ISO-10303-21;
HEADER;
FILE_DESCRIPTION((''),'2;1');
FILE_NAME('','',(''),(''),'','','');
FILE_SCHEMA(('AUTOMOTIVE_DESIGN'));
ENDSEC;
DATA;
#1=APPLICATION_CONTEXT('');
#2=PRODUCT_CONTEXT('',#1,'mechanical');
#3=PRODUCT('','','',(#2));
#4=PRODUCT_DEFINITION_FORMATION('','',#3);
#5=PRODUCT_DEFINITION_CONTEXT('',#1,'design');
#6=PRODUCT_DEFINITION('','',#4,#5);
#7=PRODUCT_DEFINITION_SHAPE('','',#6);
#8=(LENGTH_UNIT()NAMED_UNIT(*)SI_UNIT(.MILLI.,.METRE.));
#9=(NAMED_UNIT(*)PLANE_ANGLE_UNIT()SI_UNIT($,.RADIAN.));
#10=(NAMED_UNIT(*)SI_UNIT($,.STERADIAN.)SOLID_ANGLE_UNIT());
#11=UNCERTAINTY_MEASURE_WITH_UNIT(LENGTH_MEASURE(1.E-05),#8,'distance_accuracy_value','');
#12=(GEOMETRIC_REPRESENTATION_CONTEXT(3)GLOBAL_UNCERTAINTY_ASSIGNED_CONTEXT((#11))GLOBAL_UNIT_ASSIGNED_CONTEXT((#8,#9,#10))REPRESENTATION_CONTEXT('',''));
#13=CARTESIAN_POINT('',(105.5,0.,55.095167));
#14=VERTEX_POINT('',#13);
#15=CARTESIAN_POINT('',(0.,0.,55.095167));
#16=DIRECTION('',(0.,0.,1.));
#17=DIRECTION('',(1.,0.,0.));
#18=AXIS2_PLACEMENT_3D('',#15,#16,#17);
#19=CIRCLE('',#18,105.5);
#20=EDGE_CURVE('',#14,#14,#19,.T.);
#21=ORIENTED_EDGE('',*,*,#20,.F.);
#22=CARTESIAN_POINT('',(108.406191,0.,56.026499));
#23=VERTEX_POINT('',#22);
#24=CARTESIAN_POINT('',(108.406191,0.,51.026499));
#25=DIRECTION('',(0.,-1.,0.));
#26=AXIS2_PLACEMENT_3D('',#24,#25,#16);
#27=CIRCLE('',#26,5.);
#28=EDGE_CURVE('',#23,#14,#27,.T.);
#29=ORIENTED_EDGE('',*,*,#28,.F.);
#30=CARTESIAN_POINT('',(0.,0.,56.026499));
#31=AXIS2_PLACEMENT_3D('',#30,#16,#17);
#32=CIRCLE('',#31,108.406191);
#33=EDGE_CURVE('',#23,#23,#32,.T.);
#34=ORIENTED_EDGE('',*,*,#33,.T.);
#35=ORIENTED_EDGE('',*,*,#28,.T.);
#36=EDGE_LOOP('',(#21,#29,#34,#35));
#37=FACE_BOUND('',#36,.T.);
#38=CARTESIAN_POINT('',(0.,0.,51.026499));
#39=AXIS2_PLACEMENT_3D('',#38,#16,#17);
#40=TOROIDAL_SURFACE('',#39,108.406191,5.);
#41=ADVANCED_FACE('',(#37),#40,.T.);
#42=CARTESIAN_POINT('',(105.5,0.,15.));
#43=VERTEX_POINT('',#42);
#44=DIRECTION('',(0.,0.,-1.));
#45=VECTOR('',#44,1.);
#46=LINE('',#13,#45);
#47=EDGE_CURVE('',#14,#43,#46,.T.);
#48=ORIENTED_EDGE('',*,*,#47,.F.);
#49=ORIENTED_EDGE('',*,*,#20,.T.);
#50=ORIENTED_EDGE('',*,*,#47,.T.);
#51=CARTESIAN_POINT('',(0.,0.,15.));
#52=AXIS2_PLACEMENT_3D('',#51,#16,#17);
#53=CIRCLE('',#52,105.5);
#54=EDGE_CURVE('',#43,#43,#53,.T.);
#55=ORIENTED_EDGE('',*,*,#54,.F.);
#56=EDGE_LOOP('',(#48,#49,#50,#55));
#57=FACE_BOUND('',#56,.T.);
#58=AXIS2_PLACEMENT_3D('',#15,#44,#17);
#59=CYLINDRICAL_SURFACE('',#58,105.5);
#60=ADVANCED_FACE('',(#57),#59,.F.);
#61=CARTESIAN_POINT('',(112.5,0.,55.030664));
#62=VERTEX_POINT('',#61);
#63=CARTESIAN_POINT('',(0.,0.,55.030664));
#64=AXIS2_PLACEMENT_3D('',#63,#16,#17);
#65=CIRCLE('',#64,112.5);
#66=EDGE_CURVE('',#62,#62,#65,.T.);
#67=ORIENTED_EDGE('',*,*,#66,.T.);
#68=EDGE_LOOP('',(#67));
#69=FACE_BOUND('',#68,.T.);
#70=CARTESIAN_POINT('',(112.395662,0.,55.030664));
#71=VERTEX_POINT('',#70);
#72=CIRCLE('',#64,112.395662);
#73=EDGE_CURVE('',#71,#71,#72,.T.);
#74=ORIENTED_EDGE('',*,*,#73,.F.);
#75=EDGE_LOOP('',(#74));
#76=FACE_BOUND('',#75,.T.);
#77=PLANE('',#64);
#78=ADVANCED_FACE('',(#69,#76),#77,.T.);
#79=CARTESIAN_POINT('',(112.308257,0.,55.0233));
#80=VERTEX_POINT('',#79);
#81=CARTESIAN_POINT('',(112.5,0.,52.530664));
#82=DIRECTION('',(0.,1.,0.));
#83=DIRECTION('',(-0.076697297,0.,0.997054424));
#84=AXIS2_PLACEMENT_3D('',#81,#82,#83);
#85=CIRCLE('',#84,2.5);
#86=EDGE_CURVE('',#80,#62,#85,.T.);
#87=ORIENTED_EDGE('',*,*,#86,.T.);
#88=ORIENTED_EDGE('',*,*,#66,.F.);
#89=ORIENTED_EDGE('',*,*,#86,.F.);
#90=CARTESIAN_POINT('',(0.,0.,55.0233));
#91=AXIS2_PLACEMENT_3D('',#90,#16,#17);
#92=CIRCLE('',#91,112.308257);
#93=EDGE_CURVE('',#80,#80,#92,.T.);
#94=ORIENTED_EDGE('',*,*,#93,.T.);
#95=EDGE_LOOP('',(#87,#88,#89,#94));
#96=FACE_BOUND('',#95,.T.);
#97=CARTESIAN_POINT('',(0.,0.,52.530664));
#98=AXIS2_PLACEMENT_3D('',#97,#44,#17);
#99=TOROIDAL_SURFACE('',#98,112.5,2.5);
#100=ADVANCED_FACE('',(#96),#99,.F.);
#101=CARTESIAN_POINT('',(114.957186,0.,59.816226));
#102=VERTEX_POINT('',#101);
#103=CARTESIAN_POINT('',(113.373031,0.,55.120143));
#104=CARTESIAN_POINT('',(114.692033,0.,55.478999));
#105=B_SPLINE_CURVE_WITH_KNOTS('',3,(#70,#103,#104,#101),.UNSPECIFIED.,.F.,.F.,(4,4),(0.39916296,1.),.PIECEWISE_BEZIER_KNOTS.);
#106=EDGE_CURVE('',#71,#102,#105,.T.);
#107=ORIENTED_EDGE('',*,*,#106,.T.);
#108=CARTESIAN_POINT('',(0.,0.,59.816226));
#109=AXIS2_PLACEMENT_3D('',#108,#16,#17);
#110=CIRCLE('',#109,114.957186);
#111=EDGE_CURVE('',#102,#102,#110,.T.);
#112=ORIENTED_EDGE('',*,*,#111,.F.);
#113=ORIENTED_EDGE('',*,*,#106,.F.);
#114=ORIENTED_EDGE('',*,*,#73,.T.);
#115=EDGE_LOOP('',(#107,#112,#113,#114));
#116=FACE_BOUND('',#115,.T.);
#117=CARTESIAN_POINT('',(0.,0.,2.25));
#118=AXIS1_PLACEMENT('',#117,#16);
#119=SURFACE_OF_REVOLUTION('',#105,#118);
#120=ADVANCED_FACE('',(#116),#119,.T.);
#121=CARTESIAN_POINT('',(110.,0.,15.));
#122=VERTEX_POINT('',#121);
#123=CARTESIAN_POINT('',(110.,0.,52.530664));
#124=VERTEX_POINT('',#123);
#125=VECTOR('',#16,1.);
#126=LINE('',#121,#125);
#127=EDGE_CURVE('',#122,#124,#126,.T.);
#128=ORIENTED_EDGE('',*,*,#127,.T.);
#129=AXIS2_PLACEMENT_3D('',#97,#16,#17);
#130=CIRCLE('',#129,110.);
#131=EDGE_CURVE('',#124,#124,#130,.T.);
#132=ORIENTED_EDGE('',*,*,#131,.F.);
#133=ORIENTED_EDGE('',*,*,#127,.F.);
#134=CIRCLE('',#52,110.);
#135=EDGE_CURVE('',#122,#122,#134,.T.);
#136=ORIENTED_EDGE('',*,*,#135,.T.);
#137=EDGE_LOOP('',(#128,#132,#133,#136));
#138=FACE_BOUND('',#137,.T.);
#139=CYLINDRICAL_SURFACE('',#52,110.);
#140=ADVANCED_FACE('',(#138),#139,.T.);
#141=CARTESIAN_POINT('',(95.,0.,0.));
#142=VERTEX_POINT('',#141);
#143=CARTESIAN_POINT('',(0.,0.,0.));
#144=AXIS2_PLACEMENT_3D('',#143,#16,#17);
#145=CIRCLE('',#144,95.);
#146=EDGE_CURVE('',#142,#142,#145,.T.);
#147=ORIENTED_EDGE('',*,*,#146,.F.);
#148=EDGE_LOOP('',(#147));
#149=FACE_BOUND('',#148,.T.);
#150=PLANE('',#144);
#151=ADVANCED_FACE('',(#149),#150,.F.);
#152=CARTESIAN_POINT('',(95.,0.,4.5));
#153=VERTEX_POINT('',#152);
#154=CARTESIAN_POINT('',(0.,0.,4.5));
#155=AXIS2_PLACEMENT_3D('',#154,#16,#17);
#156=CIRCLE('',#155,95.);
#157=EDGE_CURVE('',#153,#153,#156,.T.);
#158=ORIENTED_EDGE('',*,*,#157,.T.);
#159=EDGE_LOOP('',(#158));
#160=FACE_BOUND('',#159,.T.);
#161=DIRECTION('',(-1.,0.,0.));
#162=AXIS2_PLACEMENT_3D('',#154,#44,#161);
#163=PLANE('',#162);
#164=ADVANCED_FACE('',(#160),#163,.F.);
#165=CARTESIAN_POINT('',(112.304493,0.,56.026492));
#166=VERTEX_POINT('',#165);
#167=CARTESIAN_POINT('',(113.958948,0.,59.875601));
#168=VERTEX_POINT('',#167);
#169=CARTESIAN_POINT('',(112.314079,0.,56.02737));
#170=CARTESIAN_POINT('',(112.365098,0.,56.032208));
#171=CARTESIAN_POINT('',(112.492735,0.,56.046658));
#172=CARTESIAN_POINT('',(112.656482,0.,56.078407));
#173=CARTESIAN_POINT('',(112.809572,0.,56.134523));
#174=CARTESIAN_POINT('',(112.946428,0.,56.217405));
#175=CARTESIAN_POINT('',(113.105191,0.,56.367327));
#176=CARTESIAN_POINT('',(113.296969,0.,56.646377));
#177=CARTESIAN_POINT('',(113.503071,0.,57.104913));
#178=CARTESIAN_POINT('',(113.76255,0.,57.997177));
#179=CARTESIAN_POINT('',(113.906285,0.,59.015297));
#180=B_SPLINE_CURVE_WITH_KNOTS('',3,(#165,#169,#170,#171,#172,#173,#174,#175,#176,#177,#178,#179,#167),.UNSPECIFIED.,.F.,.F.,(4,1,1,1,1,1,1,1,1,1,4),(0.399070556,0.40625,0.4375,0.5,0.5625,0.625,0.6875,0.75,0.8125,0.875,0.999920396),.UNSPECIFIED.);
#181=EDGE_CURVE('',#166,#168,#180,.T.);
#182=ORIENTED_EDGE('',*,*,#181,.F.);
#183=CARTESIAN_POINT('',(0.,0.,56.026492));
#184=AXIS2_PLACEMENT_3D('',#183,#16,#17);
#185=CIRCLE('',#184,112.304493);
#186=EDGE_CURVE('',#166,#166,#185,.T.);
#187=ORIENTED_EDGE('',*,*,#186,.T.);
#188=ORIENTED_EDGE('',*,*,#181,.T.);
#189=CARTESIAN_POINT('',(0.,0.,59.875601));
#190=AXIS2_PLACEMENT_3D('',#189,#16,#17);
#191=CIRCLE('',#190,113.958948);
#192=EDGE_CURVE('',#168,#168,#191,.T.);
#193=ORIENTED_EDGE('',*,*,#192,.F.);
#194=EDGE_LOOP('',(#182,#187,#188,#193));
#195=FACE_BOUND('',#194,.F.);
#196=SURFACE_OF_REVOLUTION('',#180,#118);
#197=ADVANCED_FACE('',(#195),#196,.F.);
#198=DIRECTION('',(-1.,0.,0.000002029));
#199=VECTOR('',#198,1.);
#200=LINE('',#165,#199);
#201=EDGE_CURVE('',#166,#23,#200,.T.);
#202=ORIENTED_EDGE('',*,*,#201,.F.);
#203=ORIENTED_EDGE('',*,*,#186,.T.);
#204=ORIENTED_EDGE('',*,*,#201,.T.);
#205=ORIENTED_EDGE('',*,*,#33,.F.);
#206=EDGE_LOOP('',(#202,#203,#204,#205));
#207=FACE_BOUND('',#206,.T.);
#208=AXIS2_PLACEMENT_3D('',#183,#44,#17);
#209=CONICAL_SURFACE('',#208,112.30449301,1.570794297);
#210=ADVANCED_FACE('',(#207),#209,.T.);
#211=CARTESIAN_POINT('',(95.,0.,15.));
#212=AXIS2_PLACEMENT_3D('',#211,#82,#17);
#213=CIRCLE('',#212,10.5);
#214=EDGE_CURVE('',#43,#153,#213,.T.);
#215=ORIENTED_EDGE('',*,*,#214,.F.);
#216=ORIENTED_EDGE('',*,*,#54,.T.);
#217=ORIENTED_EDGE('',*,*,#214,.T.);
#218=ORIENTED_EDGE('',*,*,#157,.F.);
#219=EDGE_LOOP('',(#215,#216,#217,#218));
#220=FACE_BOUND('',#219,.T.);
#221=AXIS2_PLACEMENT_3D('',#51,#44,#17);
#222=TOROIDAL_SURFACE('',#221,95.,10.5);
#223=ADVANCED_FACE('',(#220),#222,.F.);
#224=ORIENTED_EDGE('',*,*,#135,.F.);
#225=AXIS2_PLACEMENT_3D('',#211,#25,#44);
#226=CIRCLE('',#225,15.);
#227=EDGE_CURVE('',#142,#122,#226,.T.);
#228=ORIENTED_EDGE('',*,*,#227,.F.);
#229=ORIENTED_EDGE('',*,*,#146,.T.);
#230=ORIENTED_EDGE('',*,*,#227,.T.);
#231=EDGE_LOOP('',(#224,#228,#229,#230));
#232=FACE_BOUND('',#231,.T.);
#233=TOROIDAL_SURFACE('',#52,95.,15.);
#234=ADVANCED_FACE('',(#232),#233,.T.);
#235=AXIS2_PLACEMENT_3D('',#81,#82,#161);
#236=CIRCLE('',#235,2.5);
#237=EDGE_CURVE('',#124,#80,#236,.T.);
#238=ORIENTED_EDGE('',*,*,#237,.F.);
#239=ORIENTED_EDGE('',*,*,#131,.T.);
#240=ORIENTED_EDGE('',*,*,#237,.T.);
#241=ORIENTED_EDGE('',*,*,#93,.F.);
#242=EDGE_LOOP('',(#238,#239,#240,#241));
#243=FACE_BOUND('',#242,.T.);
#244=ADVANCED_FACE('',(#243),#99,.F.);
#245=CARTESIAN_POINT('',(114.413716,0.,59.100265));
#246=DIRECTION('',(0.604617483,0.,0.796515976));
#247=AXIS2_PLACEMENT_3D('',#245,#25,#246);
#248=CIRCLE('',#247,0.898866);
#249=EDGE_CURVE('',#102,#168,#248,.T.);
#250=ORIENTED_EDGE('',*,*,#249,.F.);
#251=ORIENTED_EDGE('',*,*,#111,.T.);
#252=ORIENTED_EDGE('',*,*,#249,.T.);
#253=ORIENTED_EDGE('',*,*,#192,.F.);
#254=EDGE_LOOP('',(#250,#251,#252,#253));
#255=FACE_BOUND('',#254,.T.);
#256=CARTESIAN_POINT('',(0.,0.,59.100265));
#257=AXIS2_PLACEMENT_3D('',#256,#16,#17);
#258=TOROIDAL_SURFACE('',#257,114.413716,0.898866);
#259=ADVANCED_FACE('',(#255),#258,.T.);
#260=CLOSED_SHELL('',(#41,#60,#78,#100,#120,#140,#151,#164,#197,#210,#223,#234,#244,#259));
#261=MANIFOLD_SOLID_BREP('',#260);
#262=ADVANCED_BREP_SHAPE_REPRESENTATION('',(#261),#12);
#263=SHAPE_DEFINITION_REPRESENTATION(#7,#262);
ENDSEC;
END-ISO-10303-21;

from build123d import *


# Not quite as in the source:
# - ends of sketch curves that miss each other by under 0.0002 mm in the source are joined
# - the dataset's text gives a spline's control points without its knots; the knots are read off the source's solid


with BuildPart() as f1:
    # F0 (on Front) → F1 (revolve)
    with BuildSketch(Plane.XZ):
        with BuildLine():
            ThreePointArc((95, 0), (105.6066017178, 4.3933982822), (110, 15))
            Line((110, 15), (110, 52.530664077))
            ThreePointArc((110, 52.530664077), (110.6656938493, 54.229287327), (112.3082567563, 55.0233001372))
            add(Edge.make_bspline(
                [(112.3082567563, 55.0233001372), (112.3371382541, 55.0255218154), (112.3662455353, 55.0279709343), (112.3956622966, 55.030664077)],
                knots=[0.3810790212, 0.3810790212, 0.3810790212, 0.3810790212, 0.3991629595, 0.3991629595, 0.3991629595, 0.3991629595], degree=3))
            add(Edge.make_bspline(
                [(112.3956622966, 55.030664077), (113.3730312437, 55.1201434726), (114.6920333455, 55.4789992419), (114.9571856025, 59.8162261419)],
                knots=[0.3991629595, 0.3991629595, 0.3991629595, 0.3991629595, 1, 1, 1, 1], degree=3))
            ThreePointArc((114.9571856025, 59.8162261419), (114.4670860694, 59.9975450862), (113.9589484435, 59.8756013901))
            add(Edge.make_bspline(
                [(112.3044930104, 56.0264915082), (112.3140793136, 56.0273704068), (112.3650984167, 56.0322078345), (112.4927350046, 56.0466584989), (112.6564819563, 56.0784065116), (112.8095723323, 56.1345234503), (112.9464281063, 56.217405399), (113.1051907024, 56.367326932), (113.2969685197, 56.6463774626), (113.5030707113, 57.1049132693), (113.7625500872, 57.9971767083), (113.9062854104, 59.0152971487), (113.9589484435, 59.8756013901)],
                knots=[0.3990705563, 0.3990705563, 0.3990705563, 0.3990705563, 0.40625, 0.4375, 0.5, 0.5625, 0.625, 0.6875, 0.75, 0.8125, 0.875, 0.9999203957, 0.9999203957, 0.9999203957, 0.9999203957], degree=3))
            Line((112.3044930104, 56.0264915082), (108.406190974, 56.0264994193))
            ThreePointArc((108.406190974, 56.0264994193), (106.8803038189, 55.787976962), (105.5000000054, 55.0951667753))
            Line((105.5000000054, 55.0951667753), (105.5, 15))
            ThreePointArc((105.5, 15), (102.4246212025, 7.5753787975), (95, 4.5))
            Line((95, 4.5), (92.4233198166, 4.5))
            Line((92.4233198166, 4.5), (0, 4.5))
            Line((0, 4.5), (0, 0))
            Line((0, 0), (92.4233198166, 0))
            Line((92.4233198166, 0), (95, 0))
        make_face()
        with BuildLine():
            add(Edge.make_bspline(
                [(112.3082567563, 55.0233001372), (112.3371382541, 55.0255218154), (112.3662455353, 55.0279709343), (112.3956622966, 55.030664077)],
                knots=[0.3810790212, 0.3810790212, 0.3810790212, 0.3810790212, 0.3991629595, 0.3991629595, 0.3991629595, 0.3991629595], degree=3))
            ThreePointArc((112.3082567563, 55.0233001372), (112.4040577008, 55.0288224137), (112.5, 55.030664077))
            Line((112.5, 55.030664077), (112.3956622966, 55.030664077))
        make_face()
    revolve(axis=Axis((0, 0, 2.25), (0, 0, 1)))


solid = f1.part
